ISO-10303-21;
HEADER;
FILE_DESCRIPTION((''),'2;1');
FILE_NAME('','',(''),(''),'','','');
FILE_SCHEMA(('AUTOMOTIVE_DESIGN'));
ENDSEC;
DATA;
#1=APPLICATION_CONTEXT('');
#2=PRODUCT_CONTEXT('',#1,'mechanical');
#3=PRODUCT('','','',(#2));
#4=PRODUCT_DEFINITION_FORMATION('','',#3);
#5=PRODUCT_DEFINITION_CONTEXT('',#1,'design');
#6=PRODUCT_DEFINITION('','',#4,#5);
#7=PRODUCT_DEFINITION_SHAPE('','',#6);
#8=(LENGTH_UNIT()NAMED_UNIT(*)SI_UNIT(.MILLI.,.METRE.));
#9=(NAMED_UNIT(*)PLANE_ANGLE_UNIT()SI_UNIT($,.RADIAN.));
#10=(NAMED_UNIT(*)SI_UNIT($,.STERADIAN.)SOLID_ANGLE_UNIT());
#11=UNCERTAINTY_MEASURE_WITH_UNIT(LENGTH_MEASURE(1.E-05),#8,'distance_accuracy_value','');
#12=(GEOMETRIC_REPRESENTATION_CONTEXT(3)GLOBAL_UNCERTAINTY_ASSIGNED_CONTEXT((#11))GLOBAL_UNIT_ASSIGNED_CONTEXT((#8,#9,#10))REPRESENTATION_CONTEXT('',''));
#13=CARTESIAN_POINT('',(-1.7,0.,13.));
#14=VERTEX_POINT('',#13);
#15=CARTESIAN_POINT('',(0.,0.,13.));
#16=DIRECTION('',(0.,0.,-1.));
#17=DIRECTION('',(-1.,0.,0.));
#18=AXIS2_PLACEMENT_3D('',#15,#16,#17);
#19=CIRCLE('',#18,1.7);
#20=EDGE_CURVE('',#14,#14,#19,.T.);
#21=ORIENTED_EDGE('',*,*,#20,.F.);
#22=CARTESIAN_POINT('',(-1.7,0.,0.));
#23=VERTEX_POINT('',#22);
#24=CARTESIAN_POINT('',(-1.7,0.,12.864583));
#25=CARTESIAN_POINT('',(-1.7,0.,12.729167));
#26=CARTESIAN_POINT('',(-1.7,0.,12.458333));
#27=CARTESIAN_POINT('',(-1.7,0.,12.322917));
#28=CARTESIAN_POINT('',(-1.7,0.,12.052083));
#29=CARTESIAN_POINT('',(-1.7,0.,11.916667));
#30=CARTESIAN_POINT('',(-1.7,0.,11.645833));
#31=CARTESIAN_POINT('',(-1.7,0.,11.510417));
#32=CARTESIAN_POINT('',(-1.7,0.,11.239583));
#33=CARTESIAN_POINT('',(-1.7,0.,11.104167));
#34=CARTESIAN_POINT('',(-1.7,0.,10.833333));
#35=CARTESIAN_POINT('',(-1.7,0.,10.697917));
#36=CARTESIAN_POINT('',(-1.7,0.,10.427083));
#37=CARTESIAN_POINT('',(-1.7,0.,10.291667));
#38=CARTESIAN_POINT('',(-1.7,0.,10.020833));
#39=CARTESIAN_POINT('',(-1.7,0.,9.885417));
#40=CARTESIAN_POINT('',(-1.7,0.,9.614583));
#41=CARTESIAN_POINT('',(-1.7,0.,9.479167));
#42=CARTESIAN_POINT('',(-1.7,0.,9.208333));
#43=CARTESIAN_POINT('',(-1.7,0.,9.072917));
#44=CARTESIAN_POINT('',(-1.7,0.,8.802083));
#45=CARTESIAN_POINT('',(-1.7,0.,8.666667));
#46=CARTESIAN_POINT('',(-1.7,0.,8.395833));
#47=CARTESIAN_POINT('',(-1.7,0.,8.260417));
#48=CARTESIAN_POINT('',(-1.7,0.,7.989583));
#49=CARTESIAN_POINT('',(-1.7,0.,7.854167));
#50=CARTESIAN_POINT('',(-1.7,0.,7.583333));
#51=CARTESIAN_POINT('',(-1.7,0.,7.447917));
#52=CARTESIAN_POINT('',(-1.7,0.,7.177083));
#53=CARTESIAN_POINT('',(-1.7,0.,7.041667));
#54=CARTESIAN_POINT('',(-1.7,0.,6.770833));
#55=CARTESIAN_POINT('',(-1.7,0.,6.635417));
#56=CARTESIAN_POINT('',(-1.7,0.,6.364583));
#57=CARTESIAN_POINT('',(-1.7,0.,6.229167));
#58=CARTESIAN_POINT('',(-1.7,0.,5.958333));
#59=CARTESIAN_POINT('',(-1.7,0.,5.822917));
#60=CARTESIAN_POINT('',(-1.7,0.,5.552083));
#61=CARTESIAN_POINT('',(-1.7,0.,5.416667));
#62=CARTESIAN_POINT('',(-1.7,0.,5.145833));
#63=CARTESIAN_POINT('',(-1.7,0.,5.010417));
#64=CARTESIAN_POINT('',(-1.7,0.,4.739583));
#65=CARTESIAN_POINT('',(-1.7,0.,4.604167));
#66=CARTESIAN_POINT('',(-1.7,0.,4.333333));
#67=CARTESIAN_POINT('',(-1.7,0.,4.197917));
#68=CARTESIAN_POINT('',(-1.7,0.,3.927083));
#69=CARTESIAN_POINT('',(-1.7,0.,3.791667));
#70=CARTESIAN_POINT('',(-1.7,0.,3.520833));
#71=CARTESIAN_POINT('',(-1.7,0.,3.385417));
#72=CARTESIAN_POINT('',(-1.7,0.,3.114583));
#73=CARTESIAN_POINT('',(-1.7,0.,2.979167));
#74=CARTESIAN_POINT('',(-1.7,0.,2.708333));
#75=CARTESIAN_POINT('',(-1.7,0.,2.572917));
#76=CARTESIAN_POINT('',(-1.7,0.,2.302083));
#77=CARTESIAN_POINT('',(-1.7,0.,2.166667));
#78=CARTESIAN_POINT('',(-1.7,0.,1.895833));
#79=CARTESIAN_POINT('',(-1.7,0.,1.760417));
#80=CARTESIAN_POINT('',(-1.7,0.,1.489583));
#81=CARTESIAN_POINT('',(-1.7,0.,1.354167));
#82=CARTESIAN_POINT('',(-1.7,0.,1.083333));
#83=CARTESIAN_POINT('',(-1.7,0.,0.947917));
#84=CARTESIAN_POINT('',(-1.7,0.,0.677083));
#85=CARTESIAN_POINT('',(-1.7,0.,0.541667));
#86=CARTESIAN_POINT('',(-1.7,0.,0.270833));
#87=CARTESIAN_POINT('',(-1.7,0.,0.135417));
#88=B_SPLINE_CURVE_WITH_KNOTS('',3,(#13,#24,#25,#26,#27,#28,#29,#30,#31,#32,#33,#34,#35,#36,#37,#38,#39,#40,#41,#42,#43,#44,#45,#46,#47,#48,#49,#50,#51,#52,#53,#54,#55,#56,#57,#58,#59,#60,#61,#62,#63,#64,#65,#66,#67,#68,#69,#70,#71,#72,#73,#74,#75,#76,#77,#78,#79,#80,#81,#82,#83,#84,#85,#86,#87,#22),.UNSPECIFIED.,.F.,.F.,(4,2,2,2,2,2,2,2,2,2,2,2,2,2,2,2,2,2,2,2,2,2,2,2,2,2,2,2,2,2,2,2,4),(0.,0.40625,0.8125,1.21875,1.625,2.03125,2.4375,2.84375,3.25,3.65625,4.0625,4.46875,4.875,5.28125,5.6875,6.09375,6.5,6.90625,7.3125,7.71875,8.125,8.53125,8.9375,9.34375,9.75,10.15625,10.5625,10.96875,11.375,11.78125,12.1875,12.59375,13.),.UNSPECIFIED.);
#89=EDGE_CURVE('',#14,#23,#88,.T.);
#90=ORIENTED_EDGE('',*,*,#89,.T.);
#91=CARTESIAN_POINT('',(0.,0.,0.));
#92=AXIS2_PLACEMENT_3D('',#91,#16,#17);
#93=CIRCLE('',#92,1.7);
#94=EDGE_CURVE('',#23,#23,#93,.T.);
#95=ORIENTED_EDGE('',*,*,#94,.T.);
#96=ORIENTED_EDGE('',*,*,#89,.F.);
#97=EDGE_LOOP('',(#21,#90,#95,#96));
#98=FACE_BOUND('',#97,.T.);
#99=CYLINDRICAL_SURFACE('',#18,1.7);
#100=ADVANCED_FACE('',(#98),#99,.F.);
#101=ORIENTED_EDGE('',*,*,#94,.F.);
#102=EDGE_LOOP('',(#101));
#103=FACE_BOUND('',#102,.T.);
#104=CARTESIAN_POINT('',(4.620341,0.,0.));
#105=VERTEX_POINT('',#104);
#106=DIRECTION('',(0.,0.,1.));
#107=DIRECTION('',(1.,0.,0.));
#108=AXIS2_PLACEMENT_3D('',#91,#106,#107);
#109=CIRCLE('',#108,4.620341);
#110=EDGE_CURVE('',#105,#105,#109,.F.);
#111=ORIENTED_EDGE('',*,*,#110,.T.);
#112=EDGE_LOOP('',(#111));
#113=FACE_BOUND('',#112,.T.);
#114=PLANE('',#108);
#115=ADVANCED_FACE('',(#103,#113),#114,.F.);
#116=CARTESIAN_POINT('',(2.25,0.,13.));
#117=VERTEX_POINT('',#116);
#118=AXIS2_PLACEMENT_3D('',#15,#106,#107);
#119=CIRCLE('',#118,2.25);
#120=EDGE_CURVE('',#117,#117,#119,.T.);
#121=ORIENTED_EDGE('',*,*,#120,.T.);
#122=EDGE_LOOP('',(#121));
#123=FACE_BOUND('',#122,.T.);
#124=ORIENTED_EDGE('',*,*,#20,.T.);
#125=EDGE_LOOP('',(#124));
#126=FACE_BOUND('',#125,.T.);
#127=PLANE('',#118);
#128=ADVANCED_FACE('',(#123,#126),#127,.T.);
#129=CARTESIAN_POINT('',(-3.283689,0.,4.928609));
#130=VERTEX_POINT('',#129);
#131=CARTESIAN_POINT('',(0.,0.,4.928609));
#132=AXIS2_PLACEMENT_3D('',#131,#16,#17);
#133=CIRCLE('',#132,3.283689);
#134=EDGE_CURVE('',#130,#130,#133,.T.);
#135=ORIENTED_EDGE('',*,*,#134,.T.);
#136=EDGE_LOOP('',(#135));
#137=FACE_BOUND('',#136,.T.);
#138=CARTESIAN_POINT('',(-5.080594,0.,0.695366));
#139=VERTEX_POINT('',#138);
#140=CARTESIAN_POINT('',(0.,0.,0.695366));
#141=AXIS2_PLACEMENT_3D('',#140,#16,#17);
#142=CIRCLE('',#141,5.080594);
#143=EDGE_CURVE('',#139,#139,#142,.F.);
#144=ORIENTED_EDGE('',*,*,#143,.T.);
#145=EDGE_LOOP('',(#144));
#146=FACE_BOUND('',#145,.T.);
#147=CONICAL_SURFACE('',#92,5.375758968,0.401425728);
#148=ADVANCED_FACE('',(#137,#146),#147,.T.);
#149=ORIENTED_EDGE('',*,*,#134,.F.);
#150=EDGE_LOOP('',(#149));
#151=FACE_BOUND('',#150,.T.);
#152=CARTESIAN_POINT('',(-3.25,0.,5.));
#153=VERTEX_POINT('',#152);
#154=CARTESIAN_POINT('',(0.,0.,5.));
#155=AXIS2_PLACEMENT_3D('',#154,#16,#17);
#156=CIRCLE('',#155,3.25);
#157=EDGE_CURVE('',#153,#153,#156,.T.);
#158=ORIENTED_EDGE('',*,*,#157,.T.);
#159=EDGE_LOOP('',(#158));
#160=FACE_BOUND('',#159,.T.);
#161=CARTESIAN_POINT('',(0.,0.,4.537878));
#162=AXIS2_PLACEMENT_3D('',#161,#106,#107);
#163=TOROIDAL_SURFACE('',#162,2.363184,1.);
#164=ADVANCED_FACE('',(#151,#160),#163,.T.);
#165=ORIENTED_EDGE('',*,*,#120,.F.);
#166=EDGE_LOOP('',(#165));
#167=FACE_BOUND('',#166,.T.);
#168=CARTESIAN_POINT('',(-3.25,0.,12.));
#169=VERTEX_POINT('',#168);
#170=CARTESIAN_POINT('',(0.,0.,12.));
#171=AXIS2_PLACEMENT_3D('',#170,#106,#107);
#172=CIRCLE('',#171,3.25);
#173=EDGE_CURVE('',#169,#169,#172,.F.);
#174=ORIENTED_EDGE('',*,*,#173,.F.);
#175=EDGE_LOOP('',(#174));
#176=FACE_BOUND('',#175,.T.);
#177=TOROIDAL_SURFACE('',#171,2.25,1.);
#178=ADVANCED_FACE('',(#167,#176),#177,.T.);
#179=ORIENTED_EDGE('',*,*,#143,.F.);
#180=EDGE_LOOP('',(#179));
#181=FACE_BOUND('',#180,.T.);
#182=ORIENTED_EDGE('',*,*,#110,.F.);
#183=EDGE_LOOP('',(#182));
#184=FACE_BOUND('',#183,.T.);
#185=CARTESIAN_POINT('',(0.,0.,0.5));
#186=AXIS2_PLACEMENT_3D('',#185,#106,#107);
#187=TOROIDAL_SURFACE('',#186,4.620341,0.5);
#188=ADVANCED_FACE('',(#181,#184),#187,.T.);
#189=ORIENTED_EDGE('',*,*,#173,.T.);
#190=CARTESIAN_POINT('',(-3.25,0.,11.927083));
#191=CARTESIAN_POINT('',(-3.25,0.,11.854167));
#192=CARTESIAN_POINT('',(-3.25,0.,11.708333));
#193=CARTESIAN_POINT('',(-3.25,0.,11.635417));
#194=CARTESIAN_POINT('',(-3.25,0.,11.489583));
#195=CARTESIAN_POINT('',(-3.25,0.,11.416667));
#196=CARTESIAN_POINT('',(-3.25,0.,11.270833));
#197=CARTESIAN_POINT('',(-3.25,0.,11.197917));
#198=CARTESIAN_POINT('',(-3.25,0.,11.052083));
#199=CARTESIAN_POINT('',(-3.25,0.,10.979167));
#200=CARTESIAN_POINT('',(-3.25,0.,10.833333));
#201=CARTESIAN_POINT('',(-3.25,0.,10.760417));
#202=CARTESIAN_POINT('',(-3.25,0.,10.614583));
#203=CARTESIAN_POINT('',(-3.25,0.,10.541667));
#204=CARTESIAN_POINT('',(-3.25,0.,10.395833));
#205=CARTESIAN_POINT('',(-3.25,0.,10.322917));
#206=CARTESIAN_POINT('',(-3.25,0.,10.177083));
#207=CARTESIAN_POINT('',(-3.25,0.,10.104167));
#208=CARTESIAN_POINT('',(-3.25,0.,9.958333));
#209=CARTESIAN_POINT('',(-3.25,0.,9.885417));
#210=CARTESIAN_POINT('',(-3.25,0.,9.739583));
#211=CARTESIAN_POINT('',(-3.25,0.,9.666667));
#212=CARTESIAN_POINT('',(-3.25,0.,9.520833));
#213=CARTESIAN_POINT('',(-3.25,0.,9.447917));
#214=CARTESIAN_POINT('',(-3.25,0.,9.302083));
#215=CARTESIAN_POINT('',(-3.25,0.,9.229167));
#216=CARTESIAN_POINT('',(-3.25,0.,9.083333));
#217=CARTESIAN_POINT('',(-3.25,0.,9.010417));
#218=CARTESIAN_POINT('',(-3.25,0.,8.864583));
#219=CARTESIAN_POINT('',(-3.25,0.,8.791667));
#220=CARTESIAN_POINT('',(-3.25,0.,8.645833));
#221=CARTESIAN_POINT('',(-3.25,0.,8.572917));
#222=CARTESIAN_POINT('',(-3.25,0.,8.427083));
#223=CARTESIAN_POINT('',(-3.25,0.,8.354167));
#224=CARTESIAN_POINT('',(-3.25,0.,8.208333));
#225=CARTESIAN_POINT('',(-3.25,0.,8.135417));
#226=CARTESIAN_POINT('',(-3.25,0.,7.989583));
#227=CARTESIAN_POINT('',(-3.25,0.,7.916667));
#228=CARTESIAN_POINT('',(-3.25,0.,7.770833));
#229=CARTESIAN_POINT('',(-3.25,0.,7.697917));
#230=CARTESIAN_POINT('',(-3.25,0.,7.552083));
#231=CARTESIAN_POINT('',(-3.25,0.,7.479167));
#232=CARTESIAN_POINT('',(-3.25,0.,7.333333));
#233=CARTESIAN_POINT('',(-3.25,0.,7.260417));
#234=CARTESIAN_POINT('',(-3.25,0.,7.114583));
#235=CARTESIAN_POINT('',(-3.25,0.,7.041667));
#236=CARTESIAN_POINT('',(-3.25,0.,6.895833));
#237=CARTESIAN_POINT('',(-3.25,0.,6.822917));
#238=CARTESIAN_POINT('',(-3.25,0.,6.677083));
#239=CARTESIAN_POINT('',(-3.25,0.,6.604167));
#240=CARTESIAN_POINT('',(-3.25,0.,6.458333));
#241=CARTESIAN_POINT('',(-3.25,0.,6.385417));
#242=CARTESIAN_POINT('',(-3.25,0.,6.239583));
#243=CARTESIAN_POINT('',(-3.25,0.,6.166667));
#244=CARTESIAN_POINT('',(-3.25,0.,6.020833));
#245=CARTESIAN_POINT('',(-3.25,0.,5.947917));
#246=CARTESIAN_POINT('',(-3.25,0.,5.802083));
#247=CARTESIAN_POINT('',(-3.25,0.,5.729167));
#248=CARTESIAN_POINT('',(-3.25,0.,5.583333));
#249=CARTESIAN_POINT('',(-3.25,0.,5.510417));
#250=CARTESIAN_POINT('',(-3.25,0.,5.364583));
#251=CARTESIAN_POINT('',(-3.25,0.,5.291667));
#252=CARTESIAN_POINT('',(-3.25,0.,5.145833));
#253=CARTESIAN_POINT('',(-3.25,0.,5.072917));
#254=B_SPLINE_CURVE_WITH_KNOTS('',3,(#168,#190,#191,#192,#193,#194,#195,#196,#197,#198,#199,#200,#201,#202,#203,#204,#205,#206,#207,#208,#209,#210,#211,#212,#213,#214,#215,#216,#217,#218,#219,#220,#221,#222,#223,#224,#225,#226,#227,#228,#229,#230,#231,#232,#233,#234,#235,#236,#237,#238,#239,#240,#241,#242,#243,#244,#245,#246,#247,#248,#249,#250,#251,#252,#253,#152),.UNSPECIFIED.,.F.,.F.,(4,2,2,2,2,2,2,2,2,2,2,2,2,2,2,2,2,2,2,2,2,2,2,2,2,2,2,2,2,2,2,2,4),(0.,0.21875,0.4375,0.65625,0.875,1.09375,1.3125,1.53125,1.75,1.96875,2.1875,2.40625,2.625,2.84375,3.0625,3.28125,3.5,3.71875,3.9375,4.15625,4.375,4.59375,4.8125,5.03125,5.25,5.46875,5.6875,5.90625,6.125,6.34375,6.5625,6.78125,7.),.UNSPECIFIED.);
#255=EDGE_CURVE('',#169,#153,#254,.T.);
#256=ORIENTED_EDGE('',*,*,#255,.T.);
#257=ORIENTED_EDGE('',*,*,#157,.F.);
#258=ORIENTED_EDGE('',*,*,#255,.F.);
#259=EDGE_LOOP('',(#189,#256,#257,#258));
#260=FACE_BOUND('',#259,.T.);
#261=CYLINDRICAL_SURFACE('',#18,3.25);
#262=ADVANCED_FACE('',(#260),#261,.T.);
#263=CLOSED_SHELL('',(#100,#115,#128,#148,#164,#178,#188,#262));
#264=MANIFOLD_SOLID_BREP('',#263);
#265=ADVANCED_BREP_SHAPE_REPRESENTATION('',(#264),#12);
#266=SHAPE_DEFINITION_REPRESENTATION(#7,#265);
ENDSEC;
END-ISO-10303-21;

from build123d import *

# Parameters (mm, degrees)
SKETCH_1_R          = 3.25
EXTRUDE_1_DEPTH     = 13
SKETCH_2_R          = 5.375758968
EXTRUDE_2_DEPTH     = 5
EXTRUDE_2_DRAFT     = -23
SKETCH_3_R          = 1.7
CUT_EXTRUDE_1_DEPTH = 16.059799765
FILLET_1_R          = 1
FILLET_2_R          = 0.5
FILLET_3_R          = 1


with BuildPart() as part:
    # 草图1 → 凸台-拉伸1 (new body)
    with BuildSketch(Plane.XY):
        with Locations(Location((0, 0, 0), (0, 0, 180))):
            Circle(SKETCH_1_R)
    extrude(amount=EXTRUDE_1_DEPTH)


with BuildPart() as extrude_2_tool:
    # 草图2 → 凸台-拉伸2 (with draft: the straight prism first)
    with BuildSketch(Plane(origin=(0, 0, 0), x_dir=(-1, 0, 0), z_dir=(0, 0, -1))):
        Circle(SKETCH_2_R)
    extrude(amount=-EXTRUDE_2_DEPTH)
    # 凸台-拉伸2: the draft: its side faces are tilted about the plane it starts from
    extrude_2_sides = [extrude_2_tool.faces().sort_by_distance(p)[0] for p in [
        (5.375758968, 0, 2.5),
    ]]
    draft(extrude_2_sides, Plane(origin=(0, 0, 0), x_dir=(-1, 0, 0), z_dir=(0, 0, -1)), EXTRUDE_2_DRAFT)


with BuildPart() as part_1:
    add(part.part)

    # 凸台-拉伸2: add extrude_2_tool
    add(extrude_2_tool.part)

    # 草图3 → 切除-拉伸1 (cut, through all)
    with BuildSketch(Plane(origin=(0, 0, 0), x_dir=(-1, 0, 0), z_dir=(0, 0, -1))):
        Circle(SKETCH_3_R)
    extrude(amount=-CUT_EXTRUDE_1_DEPTH, mode=Mode.SUBTRACT)

    # 圆角1
    fillet_1_edges = [part_1.edges().sort_by_distance(p)[0] for p in [
        (3.25, 0, 13),
    ]]
    fillet(fillet_1_edges, radius=FILLET_1_R)

    # 圆角2
    fillet_2_edges = [part_1.edges().sort_by_distance(p)[0] for p in [
        (5.375758968, 0, 0),
    ]]
    fillet(fillet_2_edges, radius=FILLET_2_R)

    # 圆角3
    # the kernel refuses this fillet: 1 mm, written as the material it takes off along each edge
    with BuildSketch(Plane(origin=(0, 0, 5), x_dir=(-1, 0, 0), z_dir=(0, -1, 0))) as fillet_3_piece_1:
        with BuildLine():
            CenterArc((2.363183754, 0.46212222), FILLET_3_R, 332.475864529, 4.524135471)
            Line((3.25, 0), (3.253384887, 0))
            Line((3.253384887, 0), (3.283688608, 0.071391091))
        make_face()
    revolve(axis=Axis((0, 0, 5), (0, 0, -1)), mode=Mode.SUBTRACT)


solid = part_1.part
